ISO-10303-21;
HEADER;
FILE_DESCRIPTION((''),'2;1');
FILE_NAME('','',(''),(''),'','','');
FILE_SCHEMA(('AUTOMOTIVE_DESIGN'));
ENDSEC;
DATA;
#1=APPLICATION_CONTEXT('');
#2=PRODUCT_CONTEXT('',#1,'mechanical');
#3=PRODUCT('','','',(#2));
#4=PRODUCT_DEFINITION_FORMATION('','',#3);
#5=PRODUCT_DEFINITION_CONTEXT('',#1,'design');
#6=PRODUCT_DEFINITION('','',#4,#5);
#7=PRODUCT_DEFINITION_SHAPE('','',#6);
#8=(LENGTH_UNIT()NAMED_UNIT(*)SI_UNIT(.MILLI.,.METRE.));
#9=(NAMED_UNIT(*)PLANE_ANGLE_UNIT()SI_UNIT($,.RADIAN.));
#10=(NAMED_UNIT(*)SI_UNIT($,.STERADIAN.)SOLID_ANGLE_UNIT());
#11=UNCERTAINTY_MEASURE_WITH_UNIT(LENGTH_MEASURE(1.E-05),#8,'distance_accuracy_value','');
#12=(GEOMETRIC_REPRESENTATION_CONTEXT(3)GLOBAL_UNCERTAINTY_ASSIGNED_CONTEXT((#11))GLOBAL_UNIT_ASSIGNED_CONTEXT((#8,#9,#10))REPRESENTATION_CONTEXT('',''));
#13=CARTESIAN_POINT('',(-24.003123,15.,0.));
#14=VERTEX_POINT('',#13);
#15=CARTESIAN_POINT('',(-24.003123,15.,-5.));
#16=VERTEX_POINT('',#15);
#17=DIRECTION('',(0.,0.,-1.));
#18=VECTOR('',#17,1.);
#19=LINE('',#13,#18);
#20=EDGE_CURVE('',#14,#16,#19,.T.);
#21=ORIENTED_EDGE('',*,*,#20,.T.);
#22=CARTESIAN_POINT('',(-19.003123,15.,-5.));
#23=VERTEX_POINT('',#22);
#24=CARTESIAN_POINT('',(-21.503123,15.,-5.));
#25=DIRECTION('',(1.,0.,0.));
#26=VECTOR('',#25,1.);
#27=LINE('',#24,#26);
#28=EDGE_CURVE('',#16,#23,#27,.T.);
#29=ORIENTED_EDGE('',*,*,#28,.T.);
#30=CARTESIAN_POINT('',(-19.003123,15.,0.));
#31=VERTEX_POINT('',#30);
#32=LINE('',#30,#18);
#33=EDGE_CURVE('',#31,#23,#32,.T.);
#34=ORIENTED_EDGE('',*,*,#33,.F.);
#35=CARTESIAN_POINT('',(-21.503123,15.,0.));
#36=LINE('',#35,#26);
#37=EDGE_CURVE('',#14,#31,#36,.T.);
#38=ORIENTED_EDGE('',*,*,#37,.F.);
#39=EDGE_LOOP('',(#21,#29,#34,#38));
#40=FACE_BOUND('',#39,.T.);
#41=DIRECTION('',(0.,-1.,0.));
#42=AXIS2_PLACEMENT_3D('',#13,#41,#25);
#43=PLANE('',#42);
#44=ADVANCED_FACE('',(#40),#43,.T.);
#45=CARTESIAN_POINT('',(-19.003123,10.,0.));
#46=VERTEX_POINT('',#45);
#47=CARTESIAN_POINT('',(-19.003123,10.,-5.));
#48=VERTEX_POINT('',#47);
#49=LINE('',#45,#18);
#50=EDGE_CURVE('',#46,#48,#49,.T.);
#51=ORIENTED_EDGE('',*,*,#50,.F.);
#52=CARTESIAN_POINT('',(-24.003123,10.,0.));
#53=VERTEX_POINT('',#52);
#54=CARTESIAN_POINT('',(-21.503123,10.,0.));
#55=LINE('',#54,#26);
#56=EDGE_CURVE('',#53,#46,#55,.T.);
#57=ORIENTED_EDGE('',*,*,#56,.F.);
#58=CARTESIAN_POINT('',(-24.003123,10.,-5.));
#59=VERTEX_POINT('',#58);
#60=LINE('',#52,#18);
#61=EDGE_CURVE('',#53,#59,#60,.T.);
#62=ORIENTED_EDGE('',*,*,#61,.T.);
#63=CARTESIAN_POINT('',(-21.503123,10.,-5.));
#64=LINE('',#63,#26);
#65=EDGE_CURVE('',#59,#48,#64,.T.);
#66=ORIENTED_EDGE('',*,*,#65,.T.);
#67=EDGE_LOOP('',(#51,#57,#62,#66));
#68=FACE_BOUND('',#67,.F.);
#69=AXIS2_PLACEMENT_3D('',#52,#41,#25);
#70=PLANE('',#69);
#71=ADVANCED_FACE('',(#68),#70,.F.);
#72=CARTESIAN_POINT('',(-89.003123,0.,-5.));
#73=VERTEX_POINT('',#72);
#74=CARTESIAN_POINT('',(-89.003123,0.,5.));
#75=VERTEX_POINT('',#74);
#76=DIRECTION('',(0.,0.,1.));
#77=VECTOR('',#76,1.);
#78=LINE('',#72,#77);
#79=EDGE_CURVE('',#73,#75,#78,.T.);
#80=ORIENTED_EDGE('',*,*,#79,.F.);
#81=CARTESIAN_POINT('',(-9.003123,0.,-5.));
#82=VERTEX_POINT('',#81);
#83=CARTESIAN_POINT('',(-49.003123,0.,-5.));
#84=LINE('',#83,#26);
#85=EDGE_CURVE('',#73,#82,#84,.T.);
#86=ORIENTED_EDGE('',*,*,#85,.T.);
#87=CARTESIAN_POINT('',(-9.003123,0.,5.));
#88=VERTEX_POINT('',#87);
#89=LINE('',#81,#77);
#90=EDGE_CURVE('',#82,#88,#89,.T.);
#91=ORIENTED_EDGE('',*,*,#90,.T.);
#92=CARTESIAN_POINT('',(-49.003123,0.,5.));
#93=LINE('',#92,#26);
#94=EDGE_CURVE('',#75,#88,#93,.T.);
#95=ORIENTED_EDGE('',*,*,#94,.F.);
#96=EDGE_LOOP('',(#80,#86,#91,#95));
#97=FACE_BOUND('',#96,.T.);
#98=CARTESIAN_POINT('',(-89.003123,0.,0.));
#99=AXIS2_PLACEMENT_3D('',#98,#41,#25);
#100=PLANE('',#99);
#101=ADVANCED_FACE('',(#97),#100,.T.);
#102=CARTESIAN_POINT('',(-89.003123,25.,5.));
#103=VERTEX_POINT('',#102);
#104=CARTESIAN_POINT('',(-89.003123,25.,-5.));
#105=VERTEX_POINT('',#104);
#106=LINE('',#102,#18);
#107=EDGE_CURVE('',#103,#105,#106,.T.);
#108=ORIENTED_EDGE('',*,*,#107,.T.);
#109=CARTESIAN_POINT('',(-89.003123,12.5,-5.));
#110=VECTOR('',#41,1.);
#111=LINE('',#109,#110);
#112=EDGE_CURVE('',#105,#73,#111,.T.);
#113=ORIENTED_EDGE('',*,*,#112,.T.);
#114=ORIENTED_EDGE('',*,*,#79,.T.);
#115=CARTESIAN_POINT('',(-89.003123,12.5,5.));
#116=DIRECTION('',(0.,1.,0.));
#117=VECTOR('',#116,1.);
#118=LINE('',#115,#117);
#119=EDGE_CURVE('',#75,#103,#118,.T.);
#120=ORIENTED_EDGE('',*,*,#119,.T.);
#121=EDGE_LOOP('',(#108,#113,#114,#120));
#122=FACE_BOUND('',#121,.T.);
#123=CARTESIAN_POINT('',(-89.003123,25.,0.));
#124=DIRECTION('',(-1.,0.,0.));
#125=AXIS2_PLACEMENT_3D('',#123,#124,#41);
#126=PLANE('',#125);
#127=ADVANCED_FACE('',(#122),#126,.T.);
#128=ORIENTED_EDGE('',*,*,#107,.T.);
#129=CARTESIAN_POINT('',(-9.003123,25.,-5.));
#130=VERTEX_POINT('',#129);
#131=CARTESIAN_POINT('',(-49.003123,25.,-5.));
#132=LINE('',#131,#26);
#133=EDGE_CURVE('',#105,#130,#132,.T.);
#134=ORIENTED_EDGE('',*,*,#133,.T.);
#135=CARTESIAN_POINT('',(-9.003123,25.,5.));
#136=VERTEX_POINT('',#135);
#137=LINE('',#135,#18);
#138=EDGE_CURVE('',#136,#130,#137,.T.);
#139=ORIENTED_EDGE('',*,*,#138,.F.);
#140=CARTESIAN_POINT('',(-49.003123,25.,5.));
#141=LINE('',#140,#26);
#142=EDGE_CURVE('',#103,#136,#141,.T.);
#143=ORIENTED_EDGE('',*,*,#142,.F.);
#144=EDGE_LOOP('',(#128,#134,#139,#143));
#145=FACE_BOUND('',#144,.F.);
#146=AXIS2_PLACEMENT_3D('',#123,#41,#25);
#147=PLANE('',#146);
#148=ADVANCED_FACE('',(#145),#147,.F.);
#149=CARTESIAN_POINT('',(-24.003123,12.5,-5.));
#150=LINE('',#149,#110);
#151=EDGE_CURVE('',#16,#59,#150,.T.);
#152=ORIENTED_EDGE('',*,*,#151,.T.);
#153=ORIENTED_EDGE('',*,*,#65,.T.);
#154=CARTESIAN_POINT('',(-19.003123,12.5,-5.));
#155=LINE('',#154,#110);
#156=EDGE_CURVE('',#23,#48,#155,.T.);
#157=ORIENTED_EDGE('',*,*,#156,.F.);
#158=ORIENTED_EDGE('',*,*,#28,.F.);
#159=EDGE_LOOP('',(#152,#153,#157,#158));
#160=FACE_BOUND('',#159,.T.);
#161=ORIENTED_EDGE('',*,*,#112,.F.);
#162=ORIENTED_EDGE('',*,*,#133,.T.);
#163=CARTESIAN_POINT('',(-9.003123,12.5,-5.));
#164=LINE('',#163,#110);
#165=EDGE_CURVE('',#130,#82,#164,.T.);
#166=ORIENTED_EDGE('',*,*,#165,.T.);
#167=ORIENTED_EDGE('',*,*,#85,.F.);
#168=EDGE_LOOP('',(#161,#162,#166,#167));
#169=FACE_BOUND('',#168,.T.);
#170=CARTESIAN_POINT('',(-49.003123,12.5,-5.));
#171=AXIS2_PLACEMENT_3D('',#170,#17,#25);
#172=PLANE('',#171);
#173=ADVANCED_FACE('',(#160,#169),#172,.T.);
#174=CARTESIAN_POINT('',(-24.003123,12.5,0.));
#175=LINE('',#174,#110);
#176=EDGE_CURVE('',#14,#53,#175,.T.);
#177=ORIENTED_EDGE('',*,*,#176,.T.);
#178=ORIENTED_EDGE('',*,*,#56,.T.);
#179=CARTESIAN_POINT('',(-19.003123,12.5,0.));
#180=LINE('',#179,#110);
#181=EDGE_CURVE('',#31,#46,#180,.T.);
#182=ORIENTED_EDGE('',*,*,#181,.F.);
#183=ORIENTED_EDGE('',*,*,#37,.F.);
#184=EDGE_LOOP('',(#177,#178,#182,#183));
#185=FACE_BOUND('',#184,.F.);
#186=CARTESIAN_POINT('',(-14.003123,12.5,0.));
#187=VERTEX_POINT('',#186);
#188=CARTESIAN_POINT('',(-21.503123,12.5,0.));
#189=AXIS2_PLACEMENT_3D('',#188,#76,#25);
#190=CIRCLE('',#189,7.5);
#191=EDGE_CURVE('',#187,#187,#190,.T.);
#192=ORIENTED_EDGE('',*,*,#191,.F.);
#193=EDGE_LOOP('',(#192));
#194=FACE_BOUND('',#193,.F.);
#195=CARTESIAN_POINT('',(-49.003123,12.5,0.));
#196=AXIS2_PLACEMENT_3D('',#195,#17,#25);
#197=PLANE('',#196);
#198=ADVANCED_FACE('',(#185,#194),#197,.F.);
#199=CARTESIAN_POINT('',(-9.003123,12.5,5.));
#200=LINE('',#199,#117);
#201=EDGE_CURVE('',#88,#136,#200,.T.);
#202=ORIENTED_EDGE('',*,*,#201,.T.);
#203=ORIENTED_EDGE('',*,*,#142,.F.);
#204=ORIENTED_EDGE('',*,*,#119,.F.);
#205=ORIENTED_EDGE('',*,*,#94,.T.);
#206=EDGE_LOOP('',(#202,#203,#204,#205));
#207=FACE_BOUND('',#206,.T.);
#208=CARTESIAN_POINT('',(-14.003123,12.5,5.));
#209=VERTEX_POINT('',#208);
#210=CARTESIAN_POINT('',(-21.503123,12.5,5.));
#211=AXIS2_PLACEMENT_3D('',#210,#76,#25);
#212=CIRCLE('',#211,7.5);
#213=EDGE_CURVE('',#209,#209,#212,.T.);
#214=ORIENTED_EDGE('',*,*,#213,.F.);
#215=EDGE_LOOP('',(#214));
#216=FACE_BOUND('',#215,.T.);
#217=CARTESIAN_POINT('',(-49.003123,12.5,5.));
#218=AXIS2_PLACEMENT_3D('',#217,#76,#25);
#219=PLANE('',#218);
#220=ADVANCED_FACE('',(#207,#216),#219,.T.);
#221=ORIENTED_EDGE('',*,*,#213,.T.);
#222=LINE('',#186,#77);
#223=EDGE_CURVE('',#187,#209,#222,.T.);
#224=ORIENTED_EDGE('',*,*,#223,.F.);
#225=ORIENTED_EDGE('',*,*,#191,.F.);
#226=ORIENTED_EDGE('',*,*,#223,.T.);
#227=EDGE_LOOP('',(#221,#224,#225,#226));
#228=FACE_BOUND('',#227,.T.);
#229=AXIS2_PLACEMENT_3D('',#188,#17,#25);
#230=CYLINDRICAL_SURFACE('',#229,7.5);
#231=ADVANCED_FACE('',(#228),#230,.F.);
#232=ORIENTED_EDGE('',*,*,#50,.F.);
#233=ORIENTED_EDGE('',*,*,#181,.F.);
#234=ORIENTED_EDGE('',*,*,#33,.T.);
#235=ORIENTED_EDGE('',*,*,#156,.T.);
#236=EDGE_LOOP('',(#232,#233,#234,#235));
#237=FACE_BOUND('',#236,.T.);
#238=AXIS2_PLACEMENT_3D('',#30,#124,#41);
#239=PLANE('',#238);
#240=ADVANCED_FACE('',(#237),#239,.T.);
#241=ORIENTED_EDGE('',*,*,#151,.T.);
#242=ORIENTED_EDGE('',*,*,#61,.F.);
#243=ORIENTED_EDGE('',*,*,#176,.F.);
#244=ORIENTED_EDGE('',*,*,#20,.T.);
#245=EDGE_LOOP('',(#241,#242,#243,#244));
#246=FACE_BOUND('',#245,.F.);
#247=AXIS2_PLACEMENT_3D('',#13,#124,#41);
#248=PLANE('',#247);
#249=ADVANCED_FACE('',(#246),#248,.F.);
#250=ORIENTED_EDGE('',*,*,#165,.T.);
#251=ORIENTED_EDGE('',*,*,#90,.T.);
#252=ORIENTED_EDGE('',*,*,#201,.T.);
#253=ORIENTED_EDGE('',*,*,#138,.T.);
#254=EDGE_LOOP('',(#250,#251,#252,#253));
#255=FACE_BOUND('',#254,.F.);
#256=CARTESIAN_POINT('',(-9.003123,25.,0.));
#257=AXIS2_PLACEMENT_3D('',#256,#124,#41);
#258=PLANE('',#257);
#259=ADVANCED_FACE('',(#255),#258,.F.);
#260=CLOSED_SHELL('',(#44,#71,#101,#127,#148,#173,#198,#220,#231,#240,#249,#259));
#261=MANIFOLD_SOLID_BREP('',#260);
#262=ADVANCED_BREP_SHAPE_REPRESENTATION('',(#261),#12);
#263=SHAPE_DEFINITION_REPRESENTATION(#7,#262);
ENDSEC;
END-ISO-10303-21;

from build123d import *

# Parameters (mm, degrees)
F0_W     = 80
F0_H     = 25
F0_R     = 7.5
F1_DEPTH = 5
F2_W     = 80
F2_H     = 25
F2_R     = 7.5
F2_W_2   = 5
F2_H_2   = 5
F3_DEPTH = 5


with BuildPart() as f1:
    # F0 (on Top) → F1 (new body)
    with BuildSketch(Plane.XY):
        with Locations((-49.0031225234, 12.5)):
            Rectangle(F0_W, F0_H)
        with Locations((-21.5031225234, 12.5)):
            Circle(F0_R, mode=Mode.SUBTRACT)
    extrude(amount=F1_DEPTH)

    # F2 (on face) → F3 (join)
    with BuildSketch(Plane(origin=(0, 0, 0), x_dir=(1, 0, 0), z_dir=(0, 0, -1))):
        with Locations((-49.0031225234, -12.5)):
            Rectangle(F2_W, F2_H)
        with Locations((-21.5031225234, -12.5)):
            Circle(F2_R, mode=Mode.SUBTRACT)
        with Locations((-21.5031225234, -12.5)):
            Circle(F2_R)
        with Locations((-21.5031225234, -12.5)):
            Rectangle(F2_W_2, F2_H_2, mode=Mode.SUBTRACT)
    extrude(amount=F3_DEPTH)


solid = f1.part
